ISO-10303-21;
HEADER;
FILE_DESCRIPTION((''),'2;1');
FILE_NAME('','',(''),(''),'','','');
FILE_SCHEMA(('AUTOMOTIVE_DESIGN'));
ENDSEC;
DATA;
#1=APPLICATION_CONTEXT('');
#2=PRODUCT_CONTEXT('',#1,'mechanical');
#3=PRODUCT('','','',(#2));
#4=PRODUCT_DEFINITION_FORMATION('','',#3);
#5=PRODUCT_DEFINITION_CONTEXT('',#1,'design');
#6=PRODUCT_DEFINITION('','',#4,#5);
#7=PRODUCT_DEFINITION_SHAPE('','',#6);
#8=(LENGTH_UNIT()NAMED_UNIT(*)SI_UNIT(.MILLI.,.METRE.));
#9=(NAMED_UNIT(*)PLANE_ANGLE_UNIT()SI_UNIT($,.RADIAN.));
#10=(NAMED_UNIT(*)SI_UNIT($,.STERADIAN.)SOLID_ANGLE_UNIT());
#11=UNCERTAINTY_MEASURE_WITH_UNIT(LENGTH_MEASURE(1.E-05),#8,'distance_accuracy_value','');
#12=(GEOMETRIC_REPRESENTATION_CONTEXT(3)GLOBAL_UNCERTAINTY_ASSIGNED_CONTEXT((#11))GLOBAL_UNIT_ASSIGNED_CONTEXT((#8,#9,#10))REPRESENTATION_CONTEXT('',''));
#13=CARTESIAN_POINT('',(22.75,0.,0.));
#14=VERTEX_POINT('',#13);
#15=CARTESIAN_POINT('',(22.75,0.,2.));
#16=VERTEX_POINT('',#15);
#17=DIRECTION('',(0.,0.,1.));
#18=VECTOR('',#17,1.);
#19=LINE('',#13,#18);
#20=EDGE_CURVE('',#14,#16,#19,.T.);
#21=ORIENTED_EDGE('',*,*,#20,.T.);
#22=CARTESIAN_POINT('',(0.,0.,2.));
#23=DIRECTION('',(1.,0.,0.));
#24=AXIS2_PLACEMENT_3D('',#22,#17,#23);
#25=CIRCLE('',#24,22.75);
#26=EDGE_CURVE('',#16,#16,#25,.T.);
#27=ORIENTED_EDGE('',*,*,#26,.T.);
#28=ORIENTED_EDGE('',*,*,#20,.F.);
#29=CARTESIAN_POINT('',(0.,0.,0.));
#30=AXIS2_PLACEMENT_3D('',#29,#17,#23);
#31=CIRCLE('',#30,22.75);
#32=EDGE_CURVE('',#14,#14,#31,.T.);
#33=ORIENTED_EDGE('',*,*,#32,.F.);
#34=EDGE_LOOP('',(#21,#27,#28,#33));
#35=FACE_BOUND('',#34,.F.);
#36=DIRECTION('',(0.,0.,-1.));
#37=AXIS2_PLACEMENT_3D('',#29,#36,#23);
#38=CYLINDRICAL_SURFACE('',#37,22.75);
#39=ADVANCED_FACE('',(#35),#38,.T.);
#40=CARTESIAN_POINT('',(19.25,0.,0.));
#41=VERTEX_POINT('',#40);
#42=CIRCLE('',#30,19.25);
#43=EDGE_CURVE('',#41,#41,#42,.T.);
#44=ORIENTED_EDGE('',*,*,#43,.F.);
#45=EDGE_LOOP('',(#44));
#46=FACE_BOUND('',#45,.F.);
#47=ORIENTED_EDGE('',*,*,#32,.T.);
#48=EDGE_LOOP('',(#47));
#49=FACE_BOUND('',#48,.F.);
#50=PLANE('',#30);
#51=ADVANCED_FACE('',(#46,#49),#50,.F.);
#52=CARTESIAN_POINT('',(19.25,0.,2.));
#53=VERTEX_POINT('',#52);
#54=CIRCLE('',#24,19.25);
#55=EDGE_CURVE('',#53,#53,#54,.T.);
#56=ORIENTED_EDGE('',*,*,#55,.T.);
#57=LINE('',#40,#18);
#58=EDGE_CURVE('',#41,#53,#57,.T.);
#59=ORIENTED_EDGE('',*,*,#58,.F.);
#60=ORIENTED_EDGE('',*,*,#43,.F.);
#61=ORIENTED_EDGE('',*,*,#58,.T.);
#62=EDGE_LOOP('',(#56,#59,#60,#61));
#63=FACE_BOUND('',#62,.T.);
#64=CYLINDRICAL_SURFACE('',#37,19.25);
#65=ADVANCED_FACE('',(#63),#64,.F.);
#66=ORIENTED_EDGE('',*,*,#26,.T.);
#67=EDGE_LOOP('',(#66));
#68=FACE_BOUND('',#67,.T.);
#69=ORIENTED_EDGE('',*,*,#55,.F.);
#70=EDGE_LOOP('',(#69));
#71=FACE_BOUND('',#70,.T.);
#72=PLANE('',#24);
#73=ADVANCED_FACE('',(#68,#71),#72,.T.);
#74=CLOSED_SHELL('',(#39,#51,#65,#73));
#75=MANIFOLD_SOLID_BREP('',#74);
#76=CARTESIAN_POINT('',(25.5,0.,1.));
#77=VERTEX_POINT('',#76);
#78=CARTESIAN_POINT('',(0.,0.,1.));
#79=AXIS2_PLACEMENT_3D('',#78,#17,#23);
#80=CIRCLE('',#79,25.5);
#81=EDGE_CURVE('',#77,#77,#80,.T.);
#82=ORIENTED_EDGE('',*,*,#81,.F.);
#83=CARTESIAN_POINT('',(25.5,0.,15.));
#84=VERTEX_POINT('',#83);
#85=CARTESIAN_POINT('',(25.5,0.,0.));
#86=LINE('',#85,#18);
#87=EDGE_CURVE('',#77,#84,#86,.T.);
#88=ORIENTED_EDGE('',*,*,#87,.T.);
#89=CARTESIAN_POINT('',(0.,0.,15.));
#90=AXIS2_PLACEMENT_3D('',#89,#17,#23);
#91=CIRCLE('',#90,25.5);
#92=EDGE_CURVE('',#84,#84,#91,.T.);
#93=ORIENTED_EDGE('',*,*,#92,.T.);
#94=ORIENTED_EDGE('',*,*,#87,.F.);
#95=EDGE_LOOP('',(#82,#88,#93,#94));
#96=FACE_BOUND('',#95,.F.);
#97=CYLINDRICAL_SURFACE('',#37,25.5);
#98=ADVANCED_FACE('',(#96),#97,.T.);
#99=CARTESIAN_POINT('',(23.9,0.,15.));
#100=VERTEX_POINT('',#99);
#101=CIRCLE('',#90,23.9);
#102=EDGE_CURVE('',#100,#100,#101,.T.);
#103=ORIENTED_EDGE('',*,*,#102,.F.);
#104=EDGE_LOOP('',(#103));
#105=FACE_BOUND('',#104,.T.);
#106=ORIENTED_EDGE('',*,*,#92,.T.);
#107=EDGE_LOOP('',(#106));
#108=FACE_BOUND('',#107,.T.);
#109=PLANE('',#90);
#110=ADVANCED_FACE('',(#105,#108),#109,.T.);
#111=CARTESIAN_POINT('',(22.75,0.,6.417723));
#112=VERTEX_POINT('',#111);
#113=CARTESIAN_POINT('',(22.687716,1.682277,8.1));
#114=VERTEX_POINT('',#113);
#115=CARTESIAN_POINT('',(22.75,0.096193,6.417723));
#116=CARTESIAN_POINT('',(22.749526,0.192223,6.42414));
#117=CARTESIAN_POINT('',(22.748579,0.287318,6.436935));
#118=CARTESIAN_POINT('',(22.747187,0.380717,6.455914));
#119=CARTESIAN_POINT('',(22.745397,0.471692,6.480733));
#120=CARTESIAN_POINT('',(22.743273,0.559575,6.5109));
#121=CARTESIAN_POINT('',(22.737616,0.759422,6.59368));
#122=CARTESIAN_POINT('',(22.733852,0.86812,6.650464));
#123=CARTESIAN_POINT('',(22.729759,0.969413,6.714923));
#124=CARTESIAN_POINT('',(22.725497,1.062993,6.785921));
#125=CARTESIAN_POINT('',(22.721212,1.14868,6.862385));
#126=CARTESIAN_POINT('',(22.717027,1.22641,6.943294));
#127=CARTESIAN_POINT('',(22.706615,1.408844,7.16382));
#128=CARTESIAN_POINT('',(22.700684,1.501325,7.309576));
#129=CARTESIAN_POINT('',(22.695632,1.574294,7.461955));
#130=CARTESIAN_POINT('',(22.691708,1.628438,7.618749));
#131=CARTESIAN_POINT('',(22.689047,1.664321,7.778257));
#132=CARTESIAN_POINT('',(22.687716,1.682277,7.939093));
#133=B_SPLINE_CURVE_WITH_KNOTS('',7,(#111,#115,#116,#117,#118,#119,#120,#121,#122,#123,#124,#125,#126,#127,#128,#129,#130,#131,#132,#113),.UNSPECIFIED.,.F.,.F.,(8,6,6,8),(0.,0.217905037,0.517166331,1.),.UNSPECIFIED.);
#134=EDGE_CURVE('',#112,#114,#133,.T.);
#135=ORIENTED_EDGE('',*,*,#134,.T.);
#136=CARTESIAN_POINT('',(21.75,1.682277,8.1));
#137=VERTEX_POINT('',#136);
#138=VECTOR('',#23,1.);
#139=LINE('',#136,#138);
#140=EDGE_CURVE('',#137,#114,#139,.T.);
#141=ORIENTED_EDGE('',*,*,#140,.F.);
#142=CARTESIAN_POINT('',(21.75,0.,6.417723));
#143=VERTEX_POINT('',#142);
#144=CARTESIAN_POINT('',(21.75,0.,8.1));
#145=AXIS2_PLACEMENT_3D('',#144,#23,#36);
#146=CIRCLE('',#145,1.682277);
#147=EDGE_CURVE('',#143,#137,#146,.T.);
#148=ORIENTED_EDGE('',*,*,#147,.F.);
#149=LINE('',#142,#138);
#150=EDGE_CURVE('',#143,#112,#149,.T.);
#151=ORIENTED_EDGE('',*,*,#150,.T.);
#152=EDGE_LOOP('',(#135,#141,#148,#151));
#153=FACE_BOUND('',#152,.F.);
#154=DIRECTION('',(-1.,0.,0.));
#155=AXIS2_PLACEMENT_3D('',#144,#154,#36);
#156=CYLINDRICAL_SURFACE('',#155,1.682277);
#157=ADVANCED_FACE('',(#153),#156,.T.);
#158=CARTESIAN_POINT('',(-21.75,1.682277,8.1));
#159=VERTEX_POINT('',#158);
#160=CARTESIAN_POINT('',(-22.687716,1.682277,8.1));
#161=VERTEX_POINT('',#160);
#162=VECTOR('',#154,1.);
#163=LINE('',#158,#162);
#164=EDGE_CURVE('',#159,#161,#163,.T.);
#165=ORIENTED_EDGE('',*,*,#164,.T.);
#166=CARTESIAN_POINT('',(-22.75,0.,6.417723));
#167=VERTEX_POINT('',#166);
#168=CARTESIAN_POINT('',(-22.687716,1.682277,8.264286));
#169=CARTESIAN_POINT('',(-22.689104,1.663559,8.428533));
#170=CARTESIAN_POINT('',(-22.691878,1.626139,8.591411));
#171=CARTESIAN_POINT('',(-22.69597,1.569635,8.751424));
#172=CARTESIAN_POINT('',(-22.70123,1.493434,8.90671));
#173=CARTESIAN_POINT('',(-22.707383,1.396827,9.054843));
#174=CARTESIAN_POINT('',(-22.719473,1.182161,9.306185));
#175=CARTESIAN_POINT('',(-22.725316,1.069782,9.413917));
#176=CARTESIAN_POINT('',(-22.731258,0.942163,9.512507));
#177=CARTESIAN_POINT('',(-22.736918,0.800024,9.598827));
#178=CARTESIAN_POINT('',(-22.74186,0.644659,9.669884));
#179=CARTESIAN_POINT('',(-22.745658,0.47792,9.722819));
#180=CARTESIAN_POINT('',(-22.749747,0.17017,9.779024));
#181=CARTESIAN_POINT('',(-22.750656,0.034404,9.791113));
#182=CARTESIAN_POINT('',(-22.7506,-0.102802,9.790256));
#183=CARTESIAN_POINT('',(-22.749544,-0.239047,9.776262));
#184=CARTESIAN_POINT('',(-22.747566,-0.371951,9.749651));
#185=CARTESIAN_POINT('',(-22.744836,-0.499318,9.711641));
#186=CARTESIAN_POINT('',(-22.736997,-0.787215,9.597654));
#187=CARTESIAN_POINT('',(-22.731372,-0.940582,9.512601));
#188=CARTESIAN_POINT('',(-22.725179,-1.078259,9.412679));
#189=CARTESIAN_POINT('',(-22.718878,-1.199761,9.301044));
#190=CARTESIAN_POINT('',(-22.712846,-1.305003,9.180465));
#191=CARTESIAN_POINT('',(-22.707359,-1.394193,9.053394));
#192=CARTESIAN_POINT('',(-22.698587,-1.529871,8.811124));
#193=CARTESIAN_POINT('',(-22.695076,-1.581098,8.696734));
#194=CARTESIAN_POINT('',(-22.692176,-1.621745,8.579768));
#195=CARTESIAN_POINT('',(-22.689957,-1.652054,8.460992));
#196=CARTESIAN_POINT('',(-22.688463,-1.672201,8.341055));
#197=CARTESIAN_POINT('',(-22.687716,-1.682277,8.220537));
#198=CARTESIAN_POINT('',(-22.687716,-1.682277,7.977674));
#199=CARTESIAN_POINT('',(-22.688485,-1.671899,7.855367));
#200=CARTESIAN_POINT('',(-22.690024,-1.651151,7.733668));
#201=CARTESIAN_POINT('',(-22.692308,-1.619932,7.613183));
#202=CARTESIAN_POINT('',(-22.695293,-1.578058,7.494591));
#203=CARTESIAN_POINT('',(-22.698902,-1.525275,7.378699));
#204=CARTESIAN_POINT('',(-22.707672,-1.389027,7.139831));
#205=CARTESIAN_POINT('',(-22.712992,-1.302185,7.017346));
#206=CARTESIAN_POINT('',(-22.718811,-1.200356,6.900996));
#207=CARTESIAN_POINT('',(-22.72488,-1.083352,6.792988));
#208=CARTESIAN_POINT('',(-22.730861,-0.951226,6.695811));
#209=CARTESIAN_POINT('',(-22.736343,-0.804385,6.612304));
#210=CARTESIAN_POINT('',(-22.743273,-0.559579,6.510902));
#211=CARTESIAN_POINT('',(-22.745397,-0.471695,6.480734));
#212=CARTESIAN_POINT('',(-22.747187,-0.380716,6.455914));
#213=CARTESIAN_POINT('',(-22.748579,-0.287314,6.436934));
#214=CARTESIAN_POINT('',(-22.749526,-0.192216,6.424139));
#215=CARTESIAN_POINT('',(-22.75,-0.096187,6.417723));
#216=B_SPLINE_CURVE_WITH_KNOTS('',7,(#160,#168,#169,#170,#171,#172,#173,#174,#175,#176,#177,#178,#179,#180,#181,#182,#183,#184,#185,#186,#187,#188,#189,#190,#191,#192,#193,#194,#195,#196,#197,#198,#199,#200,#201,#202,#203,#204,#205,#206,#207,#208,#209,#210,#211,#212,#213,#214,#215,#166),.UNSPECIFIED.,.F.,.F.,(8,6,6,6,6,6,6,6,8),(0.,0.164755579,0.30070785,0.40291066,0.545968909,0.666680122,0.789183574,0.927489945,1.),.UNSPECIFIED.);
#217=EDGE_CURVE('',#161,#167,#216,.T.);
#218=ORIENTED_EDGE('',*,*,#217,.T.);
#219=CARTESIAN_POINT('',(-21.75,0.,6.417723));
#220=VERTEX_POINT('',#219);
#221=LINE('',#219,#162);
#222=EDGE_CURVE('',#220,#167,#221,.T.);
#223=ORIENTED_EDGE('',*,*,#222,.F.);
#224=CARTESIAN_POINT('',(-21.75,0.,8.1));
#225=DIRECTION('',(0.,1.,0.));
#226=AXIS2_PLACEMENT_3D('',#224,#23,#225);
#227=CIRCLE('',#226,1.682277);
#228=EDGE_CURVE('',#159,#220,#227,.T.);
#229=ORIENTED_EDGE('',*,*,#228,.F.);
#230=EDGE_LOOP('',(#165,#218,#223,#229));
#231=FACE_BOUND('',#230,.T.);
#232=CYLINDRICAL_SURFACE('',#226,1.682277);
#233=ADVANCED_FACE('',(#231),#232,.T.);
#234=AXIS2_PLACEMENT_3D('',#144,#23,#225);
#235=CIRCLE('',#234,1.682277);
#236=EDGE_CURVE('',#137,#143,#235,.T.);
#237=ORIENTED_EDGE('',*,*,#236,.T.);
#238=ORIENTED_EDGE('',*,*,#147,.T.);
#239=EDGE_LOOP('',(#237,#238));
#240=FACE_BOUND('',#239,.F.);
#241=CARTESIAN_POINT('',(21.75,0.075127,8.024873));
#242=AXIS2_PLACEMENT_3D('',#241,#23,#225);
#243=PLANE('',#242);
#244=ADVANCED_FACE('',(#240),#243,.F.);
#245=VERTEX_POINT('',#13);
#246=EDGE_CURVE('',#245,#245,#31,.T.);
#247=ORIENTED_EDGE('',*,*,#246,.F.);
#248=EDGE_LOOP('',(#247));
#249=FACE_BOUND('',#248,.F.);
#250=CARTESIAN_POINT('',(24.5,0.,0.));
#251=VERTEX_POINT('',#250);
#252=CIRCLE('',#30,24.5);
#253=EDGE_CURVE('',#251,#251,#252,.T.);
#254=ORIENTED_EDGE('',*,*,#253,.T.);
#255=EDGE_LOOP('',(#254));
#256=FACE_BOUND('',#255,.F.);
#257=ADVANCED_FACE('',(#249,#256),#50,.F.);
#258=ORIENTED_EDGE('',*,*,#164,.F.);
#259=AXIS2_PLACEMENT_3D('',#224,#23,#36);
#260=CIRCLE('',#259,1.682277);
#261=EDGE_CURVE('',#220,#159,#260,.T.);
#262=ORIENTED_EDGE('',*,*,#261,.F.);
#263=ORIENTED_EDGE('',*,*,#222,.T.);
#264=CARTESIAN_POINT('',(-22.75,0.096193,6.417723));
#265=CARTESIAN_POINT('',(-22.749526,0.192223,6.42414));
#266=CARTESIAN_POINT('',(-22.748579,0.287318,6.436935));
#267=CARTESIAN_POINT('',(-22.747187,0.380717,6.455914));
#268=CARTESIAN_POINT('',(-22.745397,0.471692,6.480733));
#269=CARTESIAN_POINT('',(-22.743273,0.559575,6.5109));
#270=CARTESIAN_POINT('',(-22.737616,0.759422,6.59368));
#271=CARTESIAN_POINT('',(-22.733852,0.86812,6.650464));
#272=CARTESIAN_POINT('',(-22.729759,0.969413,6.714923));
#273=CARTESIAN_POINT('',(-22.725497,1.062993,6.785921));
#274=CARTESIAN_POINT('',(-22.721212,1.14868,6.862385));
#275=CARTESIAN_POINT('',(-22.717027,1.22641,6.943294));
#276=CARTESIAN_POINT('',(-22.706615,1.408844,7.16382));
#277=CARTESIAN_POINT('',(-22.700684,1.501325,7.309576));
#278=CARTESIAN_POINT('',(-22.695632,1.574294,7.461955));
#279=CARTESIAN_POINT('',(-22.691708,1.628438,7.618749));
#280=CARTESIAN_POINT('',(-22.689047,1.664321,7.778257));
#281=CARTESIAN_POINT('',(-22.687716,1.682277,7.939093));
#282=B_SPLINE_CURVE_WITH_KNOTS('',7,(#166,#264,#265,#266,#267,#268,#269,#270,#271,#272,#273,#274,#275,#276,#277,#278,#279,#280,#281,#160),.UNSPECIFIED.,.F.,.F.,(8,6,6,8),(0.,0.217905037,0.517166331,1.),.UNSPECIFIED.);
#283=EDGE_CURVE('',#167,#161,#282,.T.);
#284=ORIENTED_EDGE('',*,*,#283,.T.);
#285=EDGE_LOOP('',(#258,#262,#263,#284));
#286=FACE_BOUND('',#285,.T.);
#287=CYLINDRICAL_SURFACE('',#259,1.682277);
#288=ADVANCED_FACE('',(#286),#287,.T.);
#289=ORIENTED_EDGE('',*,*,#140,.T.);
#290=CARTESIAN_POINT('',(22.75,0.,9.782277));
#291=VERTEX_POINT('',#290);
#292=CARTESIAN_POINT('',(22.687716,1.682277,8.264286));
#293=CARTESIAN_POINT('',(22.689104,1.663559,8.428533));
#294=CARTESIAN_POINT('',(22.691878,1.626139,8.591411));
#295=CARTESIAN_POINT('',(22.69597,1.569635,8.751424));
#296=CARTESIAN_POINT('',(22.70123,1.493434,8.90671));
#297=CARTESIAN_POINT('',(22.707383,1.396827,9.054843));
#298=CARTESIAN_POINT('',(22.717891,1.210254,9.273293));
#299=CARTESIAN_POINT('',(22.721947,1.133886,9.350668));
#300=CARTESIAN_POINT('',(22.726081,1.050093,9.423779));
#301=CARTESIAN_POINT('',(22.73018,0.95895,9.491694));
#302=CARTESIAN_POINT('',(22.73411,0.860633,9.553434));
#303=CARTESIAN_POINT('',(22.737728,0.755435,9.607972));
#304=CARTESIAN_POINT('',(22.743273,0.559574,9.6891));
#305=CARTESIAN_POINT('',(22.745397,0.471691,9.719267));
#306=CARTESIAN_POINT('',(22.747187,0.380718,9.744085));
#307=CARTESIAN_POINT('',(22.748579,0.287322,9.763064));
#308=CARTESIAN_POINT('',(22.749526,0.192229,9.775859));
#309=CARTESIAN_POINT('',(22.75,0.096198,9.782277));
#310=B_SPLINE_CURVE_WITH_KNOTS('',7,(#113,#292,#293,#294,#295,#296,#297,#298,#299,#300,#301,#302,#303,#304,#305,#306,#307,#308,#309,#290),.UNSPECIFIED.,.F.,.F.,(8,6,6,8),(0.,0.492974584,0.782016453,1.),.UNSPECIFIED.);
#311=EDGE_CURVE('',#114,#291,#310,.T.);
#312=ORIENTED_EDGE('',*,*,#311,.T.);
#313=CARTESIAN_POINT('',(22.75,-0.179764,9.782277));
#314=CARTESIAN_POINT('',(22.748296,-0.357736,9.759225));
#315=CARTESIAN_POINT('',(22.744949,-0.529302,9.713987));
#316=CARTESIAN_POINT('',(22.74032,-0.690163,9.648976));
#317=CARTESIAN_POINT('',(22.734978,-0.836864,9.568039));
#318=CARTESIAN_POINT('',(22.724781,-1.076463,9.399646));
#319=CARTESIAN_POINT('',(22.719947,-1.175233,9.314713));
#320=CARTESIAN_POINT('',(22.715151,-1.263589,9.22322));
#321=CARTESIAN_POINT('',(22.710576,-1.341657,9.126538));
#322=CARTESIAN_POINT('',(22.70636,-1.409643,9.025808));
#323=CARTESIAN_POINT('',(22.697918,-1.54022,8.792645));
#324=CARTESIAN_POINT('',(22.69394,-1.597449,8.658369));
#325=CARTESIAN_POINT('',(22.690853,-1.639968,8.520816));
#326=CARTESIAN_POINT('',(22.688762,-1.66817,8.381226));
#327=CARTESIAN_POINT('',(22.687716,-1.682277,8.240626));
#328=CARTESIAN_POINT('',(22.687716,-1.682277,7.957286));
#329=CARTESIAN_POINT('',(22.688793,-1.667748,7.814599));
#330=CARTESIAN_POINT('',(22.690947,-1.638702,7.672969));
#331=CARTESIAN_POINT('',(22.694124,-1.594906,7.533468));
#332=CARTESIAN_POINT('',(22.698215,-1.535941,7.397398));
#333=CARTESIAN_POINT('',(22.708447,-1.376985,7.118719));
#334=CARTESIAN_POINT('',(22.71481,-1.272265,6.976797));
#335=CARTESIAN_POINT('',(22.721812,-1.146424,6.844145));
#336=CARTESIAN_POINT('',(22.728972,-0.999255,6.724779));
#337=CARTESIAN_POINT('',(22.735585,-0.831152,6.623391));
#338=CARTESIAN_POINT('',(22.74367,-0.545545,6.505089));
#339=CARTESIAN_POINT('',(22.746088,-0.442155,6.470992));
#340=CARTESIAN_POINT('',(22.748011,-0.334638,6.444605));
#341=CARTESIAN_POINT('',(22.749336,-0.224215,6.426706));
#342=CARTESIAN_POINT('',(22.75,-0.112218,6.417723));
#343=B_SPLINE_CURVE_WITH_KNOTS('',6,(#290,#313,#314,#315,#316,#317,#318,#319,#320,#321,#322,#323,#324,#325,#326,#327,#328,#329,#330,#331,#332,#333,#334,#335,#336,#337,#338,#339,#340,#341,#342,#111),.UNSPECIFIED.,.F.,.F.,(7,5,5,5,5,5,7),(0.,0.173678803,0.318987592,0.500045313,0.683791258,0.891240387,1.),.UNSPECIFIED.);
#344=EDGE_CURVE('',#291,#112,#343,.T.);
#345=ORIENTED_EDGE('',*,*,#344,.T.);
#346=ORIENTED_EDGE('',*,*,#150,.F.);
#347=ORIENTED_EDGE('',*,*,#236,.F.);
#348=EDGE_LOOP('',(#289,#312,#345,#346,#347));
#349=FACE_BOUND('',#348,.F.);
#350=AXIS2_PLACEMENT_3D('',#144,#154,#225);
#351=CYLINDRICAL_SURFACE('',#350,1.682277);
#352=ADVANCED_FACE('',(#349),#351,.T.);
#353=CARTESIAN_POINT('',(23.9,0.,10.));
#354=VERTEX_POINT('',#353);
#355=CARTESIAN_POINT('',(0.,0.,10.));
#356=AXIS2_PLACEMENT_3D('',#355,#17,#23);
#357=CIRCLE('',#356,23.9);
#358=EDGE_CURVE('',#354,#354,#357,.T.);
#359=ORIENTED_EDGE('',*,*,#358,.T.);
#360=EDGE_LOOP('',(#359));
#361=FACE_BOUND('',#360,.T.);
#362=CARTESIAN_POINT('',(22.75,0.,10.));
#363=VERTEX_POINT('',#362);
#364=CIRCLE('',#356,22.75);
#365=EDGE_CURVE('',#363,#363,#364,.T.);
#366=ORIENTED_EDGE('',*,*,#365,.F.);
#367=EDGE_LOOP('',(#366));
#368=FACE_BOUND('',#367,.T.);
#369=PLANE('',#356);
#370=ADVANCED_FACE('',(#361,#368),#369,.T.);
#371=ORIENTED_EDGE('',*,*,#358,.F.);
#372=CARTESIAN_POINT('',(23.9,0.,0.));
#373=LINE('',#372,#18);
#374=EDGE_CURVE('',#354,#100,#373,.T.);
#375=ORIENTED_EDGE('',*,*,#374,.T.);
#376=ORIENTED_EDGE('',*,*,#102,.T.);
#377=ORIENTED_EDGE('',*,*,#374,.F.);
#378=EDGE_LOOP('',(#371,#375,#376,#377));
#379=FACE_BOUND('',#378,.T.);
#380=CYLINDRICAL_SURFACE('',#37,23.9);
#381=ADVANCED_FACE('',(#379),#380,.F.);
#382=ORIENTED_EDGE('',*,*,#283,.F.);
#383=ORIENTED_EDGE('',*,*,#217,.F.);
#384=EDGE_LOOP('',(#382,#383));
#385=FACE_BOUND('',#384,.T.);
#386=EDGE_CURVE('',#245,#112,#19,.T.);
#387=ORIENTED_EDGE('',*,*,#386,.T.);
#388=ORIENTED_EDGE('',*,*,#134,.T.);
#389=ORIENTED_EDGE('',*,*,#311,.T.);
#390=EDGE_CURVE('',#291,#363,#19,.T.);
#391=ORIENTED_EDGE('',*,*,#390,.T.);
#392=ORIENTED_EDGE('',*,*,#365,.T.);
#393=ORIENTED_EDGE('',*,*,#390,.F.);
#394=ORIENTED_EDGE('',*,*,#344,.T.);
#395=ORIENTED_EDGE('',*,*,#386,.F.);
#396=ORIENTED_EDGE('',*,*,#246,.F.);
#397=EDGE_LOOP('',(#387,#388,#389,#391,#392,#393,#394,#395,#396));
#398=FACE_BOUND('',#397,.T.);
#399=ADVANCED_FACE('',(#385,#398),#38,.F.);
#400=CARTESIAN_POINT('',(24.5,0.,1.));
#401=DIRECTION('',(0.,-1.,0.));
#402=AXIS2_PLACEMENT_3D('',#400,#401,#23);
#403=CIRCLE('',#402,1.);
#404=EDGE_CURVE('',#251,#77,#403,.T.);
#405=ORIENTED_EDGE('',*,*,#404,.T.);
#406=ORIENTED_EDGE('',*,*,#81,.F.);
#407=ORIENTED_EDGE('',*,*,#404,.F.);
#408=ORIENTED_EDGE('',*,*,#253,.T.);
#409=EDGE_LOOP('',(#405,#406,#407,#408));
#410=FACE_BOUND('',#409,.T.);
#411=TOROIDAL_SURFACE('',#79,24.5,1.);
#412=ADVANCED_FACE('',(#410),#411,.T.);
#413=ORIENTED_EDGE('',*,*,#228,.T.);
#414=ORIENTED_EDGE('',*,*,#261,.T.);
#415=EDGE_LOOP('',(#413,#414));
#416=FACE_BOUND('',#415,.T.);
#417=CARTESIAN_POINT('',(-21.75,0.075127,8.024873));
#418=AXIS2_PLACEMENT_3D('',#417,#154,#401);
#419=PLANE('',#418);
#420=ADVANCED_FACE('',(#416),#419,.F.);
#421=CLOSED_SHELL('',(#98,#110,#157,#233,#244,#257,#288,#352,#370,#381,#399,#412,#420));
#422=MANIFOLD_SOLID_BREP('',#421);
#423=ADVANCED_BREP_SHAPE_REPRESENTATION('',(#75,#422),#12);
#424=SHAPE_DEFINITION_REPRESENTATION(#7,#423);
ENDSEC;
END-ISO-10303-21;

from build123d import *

# Parameters (mm, degrees)
F0_R     = 22.75
F0_R_2   = 19.25
F1_DEPTH = 2
F0_R_3   = 23.9
F2_DEPTH = 10
F0_R_4   = 25.5
F3_DEPTH = 15
F6_DEPTH = 2
F7_R     = 1


# Not quite as in the source:
# - a pattern or mirror of a feature is missing from the dataset's text; its kind, count and spacing are read off the source's solid


with BuildPart() as f1:
    # F0 (on Top) → F1 (new body)
    with BuildSketch(Plane.XY):
        Circle(F0_R)
        Circle(F0_R_2, mode=Mode.SUBTRACT)
    extrude(amount=F1_DEPTH)


with BuildPart() as f2:
    # F0 (on Top) → F2 (new body)
    with BuildSketch(Plane.XY):
        Circle(F0_R_3)
        Circle(F0_R, mode=Mode.SUBTRACT)
    extrude(amount=F2_DEPTH)

    # F0 (on Top) → F3 (join)
    with BuildSketch(Plane.XY):
        Circle(F0_R_4)
        Circle(F0_R_3, mode=Mode.SUBTRACT)
    extrude(amount=F3_DEPTH)

    # F5 (on offset) → F6 (join)
    with BuildSketch(Plane.YZ.offset(21.75)):
        with BuildLine():
            ThreePointArc((0, 6.4177232337), (1.1895493093, 6.9104506907), (1.6822767663, 8.1))
            ThreePointArc((1.6822767663, 8.1), (-1.1895493093, 9.2895493093), (0, 6.4177232337))
        make_face()
    f6 = extrude(amount=F6_DEPTH)

    # F6_copies: F6 across plane
    add(f6.mirror(Plane(origin=(0, 0, 0), x_dir=(0, 0, -1), z_dir=(-1, 0, 0))))

    # F7
    f7_edges = [f2.edges().sort_by_distance(p)[0] for p in [
        (-25.5, 0, 0),
    ]]
    fillet(f7_edges, radius=F7_R)


solid = Compound([f1.part, f2.part])
